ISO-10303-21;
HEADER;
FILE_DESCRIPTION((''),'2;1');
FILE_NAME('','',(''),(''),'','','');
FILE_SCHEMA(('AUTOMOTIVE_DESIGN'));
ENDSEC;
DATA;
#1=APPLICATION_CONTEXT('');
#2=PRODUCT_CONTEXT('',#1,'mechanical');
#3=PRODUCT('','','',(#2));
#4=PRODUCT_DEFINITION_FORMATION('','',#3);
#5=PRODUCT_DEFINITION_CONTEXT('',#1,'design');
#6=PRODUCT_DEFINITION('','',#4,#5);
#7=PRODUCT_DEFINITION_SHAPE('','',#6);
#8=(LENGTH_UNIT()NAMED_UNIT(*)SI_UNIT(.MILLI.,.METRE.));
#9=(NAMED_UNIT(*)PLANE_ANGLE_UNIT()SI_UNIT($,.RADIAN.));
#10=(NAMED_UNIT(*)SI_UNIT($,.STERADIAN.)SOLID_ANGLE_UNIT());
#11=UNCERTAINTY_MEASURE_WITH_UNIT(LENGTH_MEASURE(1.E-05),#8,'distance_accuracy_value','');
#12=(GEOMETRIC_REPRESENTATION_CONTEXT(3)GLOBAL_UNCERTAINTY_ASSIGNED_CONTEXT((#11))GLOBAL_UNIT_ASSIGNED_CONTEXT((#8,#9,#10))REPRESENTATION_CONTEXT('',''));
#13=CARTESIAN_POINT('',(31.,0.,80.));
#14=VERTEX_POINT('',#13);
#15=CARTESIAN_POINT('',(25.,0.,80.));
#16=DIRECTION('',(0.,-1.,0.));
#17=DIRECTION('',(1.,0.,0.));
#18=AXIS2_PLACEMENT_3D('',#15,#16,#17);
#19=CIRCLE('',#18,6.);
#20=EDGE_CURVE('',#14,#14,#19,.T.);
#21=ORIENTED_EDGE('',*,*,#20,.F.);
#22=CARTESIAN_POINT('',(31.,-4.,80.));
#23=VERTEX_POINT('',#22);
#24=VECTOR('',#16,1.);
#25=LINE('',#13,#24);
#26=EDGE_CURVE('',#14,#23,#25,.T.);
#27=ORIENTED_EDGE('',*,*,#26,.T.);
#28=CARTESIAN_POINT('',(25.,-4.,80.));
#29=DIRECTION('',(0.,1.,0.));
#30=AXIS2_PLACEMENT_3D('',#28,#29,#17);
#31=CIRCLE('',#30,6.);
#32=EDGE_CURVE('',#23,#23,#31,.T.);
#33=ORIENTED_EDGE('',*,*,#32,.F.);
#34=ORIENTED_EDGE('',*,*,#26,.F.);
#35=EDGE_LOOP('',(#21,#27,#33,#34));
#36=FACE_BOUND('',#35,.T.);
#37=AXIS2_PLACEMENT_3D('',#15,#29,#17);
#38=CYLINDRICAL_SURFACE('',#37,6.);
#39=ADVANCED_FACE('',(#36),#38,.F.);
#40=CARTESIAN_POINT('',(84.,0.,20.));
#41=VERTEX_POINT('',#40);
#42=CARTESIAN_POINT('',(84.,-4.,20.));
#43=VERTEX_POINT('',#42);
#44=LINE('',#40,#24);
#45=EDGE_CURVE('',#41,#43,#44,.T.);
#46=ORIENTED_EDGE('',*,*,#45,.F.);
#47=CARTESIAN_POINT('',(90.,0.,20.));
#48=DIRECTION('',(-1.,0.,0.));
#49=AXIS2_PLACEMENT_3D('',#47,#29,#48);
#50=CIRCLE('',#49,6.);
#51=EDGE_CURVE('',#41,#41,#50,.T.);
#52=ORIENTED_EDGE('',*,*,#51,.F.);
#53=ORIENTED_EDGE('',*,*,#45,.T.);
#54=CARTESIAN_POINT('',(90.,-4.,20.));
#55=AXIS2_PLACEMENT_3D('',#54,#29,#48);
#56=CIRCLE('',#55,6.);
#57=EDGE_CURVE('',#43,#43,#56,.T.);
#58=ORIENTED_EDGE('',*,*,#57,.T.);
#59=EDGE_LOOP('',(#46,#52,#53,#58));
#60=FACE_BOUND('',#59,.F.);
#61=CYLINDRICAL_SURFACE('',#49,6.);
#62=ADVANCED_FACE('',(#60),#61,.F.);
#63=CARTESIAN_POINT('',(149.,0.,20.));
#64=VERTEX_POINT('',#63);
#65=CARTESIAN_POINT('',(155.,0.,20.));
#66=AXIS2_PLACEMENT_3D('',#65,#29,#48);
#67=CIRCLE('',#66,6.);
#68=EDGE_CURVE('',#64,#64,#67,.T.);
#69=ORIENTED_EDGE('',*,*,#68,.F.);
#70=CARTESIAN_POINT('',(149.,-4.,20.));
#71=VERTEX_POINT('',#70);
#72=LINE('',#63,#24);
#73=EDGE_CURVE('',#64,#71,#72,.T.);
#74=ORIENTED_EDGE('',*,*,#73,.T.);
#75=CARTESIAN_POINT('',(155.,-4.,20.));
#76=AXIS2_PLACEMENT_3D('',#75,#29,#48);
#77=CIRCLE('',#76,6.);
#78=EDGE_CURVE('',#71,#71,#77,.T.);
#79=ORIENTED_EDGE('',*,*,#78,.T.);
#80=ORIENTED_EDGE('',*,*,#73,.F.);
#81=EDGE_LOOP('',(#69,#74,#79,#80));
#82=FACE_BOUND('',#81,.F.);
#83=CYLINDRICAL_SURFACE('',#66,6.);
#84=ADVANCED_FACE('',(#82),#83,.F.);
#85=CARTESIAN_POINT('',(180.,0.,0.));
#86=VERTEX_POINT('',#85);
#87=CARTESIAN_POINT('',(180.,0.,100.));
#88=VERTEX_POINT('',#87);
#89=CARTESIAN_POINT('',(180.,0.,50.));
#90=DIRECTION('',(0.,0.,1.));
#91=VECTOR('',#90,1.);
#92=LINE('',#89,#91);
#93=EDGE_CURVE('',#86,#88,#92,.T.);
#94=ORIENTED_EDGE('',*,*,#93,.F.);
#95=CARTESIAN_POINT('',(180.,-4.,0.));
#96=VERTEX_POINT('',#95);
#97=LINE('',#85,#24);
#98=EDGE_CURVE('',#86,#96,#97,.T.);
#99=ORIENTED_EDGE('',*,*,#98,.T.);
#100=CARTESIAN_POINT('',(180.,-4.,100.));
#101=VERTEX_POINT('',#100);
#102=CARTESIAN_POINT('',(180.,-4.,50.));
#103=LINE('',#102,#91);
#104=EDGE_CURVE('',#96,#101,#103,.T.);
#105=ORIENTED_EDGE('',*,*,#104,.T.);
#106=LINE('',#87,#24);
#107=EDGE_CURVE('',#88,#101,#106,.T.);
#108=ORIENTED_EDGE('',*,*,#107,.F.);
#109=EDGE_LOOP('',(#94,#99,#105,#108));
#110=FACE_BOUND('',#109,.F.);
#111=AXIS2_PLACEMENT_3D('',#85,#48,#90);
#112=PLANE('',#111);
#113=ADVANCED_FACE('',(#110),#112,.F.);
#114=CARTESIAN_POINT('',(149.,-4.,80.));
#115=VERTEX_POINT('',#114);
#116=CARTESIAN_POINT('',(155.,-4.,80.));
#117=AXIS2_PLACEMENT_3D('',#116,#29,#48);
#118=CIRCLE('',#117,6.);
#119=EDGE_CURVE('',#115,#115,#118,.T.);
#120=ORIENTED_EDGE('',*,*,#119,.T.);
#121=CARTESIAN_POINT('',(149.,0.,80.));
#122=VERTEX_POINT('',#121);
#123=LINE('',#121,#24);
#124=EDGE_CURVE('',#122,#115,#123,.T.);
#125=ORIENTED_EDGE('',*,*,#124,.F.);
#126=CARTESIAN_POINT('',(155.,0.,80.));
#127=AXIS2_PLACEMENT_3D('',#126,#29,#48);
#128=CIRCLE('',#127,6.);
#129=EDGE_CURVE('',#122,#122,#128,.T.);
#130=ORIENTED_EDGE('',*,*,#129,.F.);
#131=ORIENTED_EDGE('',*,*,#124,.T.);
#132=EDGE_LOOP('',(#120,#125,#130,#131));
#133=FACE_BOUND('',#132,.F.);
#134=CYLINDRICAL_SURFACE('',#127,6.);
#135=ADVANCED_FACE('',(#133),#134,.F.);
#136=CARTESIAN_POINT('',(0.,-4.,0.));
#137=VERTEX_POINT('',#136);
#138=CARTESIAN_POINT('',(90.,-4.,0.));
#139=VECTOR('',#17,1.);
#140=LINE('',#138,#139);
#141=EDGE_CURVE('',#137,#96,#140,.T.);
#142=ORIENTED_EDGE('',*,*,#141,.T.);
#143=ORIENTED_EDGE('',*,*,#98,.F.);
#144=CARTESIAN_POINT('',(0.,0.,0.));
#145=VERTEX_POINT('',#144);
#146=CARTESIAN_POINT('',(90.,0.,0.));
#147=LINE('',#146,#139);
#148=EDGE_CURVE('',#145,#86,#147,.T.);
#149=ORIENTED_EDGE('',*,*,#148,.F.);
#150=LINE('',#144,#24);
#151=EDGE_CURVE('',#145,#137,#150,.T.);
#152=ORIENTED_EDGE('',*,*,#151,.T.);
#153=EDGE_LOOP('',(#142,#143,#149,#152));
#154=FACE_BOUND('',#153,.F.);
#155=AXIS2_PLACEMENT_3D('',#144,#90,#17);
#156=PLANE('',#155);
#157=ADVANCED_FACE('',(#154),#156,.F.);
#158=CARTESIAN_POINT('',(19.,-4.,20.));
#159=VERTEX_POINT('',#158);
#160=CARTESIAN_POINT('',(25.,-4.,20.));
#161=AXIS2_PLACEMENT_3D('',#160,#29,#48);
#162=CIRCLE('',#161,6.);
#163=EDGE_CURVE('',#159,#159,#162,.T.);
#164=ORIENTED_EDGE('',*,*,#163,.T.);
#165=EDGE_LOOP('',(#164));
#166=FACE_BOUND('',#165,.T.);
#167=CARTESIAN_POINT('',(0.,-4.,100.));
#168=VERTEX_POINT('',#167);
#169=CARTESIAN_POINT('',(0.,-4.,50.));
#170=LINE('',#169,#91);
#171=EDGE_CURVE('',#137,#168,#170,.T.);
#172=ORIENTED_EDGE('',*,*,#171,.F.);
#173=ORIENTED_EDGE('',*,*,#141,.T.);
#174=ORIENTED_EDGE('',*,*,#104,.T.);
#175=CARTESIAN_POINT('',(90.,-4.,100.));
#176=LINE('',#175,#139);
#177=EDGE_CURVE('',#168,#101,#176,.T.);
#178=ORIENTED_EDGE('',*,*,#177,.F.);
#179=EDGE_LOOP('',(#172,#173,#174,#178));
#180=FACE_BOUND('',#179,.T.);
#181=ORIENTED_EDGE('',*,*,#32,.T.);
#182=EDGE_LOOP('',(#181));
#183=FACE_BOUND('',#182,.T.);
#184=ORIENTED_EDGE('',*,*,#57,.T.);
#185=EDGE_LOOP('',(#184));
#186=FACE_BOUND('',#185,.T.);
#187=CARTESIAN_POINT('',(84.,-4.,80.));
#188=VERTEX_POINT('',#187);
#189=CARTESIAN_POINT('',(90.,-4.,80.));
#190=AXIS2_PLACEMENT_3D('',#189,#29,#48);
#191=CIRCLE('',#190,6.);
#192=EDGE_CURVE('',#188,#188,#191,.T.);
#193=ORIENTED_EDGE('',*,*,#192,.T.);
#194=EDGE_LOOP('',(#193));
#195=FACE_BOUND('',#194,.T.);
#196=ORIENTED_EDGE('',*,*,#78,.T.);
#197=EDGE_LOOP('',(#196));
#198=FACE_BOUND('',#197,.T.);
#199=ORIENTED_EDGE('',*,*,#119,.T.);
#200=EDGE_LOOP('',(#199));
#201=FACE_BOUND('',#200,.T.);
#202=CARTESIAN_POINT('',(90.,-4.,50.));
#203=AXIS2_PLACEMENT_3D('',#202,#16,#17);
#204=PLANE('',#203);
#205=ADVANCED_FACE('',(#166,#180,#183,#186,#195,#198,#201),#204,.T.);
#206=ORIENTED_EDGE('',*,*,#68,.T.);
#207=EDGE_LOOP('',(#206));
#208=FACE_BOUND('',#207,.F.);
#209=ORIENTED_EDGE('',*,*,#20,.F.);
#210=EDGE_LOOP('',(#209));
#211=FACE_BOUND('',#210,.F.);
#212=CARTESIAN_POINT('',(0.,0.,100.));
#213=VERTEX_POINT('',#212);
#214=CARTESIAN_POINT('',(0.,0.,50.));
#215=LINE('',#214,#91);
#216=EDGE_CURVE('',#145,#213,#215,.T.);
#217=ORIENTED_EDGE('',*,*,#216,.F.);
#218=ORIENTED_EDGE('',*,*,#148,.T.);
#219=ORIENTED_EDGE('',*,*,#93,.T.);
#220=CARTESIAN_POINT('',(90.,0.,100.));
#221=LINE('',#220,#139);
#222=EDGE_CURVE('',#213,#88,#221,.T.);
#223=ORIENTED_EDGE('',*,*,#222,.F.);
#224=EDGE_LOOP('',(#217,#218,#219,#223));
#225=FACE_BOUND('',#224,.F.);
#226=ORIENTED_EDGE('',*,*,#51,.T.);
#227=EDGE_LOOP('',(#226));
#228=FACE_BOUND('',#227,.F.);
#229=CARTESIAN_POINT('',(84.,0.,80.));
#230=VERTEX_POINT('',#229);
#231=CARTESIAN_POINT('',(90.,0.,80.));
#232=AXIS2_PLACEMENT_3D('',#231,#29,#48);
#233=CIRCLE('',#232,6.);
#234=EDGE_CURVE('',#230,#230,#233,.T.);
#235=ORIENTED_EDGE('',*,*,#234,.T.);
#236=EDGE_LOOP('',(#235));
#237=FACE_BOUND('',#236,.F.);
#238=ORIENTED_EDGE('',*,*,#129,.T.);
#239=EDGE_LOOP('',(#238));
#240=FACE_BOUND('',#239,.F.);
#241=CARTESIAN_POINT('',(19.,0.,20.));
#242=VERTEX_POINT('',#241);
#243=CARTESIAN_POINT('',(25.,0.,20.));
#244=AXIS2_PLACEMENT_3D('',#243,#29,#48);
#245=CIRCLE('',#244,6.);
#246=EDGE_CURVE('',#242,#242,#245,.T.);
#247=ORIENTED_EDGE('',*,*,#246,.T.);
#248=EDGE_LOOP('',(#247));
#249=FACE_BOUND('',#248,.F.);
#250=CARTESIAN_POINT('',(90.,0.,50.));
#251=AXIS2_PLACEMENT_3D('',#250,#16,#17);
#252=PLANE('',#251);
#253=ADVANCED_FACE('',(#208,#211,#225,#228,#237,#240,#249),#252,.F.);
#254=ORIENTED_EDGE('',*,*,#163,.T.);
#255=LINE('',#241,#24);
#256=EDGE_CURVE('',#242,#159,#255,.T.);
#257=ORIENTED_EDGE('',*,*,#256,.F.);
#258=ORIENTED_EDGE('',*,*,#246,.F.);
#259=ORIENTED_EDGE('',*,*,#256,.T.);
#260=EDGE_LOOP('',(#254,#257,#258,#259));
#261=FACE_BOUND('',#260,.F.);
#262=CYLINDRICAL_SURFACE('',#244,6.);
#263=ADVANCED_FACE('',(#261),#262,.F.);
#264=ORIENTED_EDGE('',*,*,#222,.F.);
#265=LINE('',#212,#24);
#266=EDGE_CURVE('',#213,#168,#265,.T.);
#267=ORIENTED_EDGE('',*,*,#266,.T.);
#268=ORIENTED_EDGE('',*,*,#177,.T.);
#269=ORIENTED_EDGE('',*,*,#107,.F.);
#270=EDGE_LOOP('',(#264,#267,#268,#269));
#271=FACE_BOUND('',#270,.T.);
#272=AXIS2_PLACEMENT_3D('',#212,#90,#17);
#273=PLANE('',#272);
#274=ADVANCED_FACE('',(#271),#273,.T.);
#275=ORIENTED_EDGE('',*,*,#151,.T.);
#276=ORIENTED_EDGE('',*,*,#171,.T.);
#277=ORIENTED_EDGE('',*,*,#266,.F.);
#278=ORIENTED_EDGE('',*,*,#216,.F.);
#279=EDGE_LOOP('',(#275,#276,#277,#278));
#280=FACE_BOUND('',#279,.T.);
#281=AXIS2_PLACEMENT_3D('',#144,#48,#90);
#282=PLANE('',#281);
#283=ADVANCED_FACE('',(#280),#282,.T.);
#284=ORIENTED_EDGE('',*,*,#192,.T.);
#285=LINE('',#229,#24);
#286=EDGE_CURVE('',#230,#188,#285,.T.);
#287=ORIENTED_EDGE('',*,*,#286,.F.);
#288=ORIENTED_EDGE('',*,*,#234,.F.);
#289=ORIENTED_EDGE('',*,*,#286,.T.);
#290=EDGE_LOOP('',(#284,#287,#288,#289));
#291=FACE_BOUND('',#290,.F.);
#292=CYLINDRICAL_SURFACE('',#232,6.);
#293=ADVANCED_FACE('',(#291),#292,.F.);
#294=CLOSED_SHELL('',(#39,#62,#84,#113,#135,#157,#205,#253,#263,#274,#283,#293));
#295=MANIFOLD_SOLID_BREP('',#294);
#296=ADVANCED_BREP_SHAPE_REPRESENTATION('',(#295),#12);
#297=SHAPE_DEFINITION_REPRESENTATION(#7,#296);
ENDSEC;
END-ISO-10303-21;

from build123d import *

# Parameters (mm, degrees)
F0_W     = 180
F0_H     = 100
F1_DEPTH = 4
F2_R     = 6
F3_R     = 6
F4_DEPTH = 100


with BuildPart() as f1:
    # F0 (on Front) → F1 (new body)
    with BuildSketch(Plane.XZ):
        with Locations((90, 50)):
            Rectangle(F0_W, F0_H)
    extrude(amount=F1_DEPTH)

    # F2 (on Front) + F3 (on face) → F4 (cut)
    with BuildSketch(Plane.XZ):
        with Locations((25, 80)):
            Circle(F2_R)
    with BuildSketch(Plane(origin=(0, 0, 0), x_dir=(-1, 0, 0), z_dir=(0, 1, 0))):
        with Locations((-155, 20)):
            Circle(F3_R)
        with Locations((-155, 80)):
            Circle(F3_R)
        with Locations((-25, 20)):
            Circle(F3_R)
        with Locations((-90, 80)):
            Circle(F3_R)
        with Locations((-90, 20)):
            Circle(F3_R)
    extrude(amount=F4_DEPTH, dir=(0, -1, 0), mode=Mode.SUBTRACT)


solid = f1.part
